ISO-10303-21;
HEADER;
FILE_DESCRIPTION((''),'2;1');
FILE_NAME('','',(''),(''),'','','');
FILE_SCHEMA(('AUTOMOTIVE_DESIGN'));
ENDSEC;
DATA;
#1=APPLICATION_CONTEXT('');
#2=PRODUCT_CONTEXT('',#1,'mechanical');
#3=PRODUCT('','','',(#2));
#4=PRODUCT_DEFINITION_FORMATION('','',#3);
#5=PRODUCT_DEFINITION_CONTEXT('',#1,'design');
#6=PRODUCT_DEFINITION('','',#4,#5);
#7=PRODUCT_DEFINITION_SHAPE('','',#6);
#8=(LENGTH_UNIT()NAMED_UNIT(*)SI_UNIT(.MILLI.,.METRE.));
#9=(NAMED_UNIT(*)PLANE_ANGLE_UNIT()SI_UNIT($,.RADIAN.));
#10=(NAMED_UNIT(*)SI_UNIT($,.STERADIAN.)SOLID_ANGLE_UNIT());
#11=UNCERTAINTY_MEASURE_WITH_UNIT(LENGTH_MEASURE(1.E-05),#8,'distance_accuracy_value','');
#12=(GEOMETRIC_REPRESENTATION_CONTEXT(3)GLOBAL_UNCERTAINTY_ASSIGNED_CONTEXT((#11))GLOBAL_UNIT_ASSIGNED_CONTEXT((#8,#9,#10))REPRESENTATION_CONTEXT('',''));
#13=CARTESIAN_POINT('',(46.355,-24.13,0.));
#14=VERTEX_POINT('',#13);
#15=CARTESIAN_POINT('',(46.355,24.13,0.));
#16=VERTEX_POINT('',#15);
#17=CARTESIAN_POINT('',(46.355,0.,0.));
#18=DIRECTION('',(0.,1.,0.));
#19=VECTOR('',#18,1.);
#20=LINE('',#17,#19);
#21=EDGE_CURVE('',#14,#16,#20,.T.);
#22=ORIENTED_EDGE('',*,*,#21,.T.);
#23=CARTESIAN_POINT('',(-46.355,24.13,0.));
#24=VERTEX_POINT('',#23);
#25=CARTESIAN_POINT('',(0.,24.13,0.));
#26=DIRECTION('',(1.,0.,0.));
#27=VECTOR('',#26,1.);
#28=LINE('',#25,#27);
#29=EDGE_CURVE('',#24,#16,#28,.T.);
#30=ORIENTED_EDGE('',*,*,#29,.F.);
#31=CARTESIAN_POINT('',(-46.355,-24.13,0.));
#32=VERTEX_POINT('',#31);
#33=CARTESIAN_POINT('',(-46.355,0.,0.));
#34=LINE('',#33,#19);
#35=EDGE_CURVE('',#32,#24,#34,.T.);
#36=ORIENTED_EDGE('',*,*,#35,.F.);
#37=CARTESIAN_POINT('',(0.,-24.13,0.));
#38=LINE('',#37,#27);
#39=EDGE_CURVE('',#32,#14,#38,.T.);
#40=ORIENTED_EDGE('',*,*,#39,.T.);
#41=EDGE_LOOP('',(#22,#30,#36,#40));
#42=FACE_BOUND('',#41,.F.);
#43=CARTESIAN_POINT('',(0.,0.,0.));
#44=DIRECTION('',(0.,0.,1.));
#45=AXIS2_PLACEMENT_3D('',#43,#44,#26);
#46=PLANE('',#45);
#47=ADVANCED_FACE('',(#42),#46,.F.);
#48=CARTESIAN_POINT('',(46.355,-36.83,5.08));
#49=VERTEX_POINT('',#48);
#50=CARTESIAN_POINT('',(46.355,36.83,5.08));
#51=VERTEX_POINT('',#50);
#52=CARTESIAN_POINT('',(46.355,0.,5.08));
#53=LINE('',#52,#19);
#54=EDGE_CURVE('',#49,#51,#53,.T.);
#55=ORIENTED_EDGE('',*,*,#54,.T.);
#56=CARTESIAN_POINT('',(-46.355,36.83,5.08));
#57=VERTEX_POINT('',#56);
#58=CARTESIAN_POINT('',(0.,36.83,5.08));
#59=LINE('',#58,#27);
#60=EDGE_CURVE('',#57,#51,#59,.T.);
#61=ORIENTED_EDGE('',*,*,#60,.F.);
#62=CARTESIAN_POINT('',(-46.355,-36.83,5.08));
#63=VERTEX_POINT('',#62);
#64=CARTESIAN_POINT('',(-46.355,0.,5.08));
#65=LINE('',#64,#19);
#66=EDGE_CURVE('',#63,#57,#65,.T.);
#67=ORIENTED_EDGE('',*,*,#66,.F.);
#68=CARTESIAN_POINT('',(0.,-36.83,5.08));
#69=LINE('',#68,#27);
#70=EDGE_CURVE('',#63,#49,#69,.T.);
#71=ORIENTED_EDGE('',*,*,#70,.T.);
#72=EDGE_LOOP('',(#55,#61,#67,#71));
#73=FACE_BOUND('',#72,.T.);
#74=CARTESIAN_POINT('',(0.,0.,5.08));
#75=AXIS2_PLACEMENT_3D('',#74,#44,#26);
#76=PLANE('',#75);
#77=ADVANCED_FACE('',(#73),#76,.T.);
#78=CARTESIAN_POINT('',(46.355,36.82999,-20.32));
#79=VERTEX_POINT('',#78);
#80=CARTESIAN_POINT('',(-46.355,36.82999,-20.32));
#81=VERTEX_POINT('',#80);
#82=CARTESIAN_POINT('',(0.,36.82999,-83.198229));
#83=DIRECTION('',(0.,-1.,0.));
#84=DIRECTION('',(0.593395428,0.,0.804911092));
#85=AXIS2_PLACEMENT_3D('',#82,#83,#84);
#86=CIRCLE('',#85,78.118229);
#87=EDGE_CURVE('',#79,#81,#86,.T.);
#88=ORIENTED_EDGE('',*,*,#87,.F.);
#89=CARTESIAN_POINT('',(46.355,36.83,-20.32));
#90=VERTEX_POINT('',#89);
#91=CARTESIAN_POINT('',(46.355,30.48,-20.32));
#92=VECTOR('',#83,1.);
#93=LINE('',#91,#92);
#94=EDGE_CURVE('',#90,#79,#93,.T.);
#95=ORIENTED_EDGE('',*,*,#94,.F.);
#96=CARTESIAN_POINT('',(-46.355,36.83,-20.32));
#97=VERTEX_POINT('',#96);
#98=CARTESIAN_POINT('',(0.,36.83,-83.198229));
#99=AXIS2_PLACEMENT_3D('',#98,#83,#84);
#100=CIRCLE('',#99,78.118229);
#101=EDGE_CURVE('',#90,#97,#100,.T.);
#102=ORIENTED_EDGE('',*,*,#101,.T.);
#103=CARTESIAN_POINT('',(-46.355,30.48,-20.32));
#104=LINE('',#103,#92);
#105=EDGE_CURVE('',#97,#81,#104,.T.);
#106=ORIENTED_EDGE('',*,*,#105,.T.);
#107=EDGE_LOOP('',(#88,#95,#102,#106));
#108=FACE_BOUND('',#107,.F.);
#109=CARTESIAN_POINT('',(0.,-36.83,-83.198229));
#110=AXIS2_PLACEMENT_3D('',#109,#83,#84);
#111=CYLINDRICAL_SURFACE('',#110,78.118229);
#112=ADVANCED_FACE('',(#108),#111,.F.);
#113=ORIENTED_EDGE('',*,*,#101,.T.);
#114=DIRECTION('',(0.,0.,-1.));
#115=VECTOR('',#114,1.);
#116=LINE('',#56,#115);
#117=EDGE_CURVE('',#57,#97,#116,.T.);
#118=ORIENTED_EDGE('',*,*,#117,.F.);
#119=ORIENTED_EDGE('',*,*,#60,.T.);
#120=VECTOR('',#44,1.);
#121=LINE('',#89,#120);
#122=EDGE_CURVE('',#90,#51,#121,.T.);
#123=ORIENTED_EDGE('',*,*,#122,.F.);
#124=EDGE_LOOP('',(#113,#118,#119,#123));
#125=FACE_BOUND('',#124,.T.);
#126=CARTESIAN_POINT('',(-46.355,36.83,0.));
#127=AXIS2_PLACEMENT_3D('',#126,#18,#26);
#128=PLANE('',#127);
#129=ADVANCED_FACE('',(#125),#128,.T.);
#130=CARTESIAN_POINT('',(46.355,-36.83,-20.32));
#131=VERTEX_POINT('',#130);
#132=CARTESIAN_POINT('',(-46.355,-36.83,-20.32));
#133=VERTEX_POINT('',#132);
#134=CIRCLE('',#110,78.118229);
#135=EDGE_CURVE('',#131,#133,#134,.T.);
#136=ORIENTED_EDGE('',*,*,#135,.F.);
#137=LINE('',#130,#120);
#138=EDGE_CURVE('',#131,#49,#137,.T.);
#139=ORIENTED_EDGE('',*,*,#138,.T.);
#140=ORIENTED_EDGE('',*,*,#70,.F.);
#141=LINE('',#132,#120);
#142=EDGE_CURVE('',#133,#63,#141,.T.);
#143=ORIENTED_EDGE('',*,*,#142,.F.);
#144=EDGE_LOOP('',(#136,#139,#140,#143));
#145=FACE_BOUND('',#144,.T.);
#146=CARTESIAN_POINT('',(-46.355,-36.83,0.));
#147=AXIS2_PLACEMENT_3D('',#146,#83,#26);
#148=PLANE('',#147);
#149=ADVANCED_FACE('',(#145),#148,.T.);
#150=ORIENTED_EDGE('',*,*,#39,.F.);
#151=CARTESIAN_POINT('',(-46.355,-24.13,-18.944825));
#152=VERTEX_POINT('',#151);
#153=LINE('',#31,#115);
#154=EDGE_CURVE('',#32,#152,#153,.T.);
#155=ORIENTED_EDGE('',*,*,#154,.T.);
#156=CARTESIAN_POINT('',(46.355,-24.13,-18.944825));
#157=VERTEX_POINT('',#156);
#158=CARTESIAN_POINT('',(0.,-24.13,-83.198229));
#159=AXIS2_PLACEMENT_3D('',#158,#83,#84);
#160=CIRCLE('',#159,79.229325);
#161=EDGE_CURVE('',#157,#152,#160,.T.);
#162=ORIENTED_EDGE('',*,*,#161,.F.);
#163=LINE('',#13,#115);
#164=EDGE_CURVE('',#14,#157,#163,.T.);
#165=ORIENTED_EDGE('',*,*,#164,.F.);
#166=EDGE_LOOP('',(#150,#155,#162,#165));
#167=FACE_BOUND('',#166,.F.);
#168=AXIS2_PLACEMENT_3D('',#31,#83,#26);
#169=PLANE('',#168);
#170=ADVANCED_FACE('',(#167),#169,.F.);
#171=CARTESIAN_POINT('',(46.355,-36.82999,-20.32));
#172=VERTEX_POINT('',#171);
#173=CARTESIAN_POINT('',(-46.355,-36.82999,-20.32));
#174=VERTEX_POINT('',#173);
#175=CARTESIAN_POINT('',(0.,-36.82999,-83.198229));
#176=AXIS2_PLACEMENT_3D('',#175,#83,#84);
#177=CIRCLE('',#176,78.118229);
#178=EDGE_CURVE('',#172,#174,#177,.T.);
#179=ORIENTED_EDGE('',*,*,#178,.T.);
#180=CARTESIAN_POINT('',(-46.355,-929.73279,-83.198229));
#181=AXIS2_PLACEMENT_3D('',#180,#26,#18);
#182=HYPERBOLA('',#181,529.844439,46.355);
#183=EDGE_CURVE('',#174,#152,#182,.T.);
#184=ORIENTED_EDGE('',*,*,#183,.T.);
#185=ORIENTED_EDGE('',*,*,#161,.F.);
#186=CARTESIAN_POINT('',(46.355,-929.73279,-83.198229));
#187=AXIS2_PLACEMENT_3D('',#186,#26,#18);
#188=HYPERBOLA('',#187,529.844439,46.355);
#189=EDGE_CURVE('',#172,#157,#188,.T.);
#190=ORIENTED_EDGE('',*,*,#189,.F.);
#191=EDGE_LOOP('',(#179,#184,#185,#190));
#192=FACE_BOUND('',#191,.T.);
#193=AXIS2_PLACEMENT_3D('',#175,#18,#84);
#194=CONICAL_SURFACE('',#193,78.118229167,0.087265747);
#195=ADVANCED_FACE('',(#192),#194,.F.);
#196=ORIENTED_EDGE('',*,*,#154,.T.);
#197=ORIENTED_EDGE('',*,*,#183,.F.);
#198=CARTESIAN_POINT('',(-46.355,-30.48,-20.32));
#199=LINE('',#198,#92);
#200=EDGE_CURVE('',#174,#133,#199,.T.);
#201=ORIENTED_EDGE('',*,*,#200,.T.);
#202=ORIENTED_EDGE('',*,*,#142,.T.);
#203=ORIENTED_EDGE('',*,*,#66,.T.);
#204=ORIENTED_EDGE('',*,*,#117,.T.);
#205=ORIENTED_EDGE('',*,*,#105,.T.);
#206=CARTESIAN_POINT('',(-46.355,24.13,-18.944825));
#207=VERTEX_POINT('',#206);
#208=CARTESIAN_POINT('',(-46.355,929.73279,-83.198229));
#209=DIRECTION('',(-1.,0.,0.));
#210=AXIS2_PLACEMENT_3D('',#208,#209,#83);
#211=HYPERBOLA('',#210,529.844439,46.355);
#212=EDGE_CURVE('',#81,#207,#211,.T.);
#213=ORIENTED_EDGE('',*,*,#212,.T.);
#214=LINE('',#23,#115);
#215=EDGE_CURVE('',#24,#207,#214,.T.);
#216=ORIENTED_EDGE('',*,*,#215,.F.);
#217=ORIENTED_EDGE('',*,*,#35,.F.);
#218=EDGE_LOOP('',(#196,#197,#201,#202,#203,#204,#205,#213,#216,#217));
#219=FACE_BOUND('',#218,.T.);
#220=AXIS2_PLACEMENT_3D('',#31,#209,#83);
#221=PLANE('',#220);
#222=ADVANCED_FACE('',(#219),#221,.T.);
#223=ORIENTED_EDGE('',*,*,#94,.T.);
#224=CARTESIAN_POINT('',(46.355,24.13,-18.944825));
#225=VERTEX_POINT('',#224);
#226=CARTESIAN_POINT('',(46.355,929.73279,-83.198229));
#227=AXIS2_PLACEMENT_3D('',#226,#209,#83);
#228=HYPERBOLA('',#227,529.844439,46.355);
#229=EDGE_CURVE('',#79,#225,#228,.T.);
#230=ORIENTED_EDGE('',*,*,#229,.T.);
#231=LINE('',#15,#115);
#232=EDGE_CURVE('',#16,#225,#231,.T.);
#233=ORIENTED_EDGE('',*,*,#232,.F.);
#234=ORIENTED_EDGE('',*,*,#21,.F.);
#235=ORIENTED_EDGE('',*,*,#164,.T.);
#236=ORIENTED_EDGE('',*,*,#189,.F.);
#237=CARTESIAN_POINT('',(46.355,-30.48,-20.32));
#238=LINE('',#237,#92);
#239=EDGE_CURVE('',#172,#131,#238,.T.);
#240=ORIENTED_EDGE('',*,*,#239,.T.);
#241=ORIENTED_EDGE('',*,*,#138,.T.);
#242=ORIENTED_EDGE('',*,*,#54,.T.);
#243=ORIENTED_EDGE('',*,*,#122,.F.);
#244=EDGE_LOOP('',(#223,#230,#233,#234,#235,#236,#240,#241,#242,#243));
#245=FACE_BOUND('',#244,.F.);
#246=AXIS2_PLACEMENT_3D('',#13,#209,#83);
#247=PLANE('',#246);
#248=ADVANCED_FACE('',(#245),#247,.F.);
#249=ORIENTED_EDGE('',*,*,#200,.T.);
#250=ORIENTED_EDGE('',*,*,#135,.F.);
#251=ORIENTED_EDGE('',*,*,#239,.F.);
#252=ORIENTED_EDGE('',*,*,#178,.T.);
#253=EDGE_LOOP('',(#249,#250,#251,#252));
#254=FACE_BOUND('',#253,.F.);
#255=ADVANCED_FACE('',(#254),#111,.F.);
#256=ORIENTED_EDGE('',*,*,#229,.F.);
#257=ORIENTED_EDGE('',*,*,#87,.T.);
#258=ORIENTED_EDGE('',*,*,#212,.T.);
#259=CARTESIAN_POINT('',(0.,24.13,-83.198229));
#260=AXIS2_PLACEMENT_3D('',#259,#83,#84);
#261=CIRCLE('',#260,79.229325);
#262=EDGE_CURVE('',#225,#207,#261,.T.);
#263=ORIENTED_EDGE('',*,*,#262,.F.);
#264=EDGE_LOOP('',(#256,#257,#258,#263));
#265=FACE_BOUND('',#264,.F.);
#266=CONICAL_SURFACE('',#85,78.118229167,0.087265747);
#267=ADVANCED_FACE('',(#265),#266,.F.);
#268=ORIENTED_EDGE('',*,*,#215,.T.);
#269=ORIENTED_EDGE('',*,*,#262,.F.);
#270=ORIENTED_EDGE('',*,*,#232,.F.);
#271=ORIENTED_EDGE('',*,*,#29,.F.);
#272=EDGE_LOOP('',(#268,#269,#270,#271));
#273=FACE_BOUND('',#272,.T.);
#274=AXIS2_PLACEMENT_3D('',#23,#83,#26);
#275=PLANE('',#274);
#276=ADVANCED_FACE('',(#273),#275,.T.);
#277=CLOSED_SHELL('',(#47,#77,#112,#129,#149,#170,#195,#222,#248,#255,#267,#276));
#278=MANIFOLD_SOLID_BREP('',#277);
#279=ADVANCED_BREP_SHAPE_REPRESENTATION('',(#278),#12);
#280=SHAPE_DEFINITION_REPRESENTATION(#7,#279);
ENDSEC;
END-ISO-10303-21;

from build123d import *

# Parameters (mm, degrees)
F0_W       = 92.71
F0_H       = 73.66
F1_DEPTH   = 5.08
F2_W       = 92.71
F2_H       = 12.7
F3_DEPTH   = 20.32
F5_DEPTH   = 73.661
F6_SIZE2   = 1.111096
F6_SIZE    = 12.69999
F6_2_SIZE2 = 1.111096
F6_2_SIZE  = 12.69999


# Not quite as in the source:
# - a fillet or chamfer is up to 0.001 mm smaller than in the source, because OpenCascade refuses the exact size


with BuildPart() as f1:
    # F0 (on Top) → F1 (new body)
    with BuildSketch(Plane.XY):
        Rectangle(F0_W, F0_H)
    extrude(amount=F1_DEPTH)

    # F2 (on face) → F3 (join)
    with BuildSketch(Plane(origin=(0, 0, 0), x_dir=(1, 0, 0), z_dir=(0, 0, -1))):
        with Locations((0, 30.48)):
            Rectangle(F2_W, F2_H)
        with Locations((0, -30.48)):
            Rectangle(F2_W, F2_H)
    extrude(amount=F3_DEPTH)

    # F4 (on face) → F5 (cut, through all)
    with BuildSketch(Plane.XZ.offset(36.83)):
        with BuildLine():
            Line((-46.355, -20.32), (46.355, -20.32))
            ThreePointArc((46.355, -20.32), (0, -5.08), (-46.355, -20.32))
        make_face()
    extrude(amount=-F5_DEPTH, mode=Mode.SUBTRACT)

    # F6 (size 12.7 and 1.1111060268 in the source; OpenCascade refuses exactly that, so slightly less here)
    f6_edges = [f1.edges().sort_by_distance(p)[0] for p in [
        (0, 24.13, -5.08),
    ]]
    f6_side = f1.faces().sort_by_distance((0, 30.48, -5.08))[0]
    chamfer(f6_edges, length=F6_SIZE, length2=F6_SIZE2, reference=f6_side)

    # F6#2 (size 12.7 and 1.1111060268 in the source; OpenCascade refuses exactly that, so slightly less here)
    f6_2_edges = [f1.edges().sort_by_distance(p)[0] for p in [
        (0, -24.13, -5.08),
    ]]
    f6_2_side = f1.faces().sort_by_distance((0, -30.48, -5.08))[0]
    chamfer(f6_2_edges, length=F6_2_SIZE, length2=F6_2_SIZE2, reference=f6_2_side)


solid = f1.part
